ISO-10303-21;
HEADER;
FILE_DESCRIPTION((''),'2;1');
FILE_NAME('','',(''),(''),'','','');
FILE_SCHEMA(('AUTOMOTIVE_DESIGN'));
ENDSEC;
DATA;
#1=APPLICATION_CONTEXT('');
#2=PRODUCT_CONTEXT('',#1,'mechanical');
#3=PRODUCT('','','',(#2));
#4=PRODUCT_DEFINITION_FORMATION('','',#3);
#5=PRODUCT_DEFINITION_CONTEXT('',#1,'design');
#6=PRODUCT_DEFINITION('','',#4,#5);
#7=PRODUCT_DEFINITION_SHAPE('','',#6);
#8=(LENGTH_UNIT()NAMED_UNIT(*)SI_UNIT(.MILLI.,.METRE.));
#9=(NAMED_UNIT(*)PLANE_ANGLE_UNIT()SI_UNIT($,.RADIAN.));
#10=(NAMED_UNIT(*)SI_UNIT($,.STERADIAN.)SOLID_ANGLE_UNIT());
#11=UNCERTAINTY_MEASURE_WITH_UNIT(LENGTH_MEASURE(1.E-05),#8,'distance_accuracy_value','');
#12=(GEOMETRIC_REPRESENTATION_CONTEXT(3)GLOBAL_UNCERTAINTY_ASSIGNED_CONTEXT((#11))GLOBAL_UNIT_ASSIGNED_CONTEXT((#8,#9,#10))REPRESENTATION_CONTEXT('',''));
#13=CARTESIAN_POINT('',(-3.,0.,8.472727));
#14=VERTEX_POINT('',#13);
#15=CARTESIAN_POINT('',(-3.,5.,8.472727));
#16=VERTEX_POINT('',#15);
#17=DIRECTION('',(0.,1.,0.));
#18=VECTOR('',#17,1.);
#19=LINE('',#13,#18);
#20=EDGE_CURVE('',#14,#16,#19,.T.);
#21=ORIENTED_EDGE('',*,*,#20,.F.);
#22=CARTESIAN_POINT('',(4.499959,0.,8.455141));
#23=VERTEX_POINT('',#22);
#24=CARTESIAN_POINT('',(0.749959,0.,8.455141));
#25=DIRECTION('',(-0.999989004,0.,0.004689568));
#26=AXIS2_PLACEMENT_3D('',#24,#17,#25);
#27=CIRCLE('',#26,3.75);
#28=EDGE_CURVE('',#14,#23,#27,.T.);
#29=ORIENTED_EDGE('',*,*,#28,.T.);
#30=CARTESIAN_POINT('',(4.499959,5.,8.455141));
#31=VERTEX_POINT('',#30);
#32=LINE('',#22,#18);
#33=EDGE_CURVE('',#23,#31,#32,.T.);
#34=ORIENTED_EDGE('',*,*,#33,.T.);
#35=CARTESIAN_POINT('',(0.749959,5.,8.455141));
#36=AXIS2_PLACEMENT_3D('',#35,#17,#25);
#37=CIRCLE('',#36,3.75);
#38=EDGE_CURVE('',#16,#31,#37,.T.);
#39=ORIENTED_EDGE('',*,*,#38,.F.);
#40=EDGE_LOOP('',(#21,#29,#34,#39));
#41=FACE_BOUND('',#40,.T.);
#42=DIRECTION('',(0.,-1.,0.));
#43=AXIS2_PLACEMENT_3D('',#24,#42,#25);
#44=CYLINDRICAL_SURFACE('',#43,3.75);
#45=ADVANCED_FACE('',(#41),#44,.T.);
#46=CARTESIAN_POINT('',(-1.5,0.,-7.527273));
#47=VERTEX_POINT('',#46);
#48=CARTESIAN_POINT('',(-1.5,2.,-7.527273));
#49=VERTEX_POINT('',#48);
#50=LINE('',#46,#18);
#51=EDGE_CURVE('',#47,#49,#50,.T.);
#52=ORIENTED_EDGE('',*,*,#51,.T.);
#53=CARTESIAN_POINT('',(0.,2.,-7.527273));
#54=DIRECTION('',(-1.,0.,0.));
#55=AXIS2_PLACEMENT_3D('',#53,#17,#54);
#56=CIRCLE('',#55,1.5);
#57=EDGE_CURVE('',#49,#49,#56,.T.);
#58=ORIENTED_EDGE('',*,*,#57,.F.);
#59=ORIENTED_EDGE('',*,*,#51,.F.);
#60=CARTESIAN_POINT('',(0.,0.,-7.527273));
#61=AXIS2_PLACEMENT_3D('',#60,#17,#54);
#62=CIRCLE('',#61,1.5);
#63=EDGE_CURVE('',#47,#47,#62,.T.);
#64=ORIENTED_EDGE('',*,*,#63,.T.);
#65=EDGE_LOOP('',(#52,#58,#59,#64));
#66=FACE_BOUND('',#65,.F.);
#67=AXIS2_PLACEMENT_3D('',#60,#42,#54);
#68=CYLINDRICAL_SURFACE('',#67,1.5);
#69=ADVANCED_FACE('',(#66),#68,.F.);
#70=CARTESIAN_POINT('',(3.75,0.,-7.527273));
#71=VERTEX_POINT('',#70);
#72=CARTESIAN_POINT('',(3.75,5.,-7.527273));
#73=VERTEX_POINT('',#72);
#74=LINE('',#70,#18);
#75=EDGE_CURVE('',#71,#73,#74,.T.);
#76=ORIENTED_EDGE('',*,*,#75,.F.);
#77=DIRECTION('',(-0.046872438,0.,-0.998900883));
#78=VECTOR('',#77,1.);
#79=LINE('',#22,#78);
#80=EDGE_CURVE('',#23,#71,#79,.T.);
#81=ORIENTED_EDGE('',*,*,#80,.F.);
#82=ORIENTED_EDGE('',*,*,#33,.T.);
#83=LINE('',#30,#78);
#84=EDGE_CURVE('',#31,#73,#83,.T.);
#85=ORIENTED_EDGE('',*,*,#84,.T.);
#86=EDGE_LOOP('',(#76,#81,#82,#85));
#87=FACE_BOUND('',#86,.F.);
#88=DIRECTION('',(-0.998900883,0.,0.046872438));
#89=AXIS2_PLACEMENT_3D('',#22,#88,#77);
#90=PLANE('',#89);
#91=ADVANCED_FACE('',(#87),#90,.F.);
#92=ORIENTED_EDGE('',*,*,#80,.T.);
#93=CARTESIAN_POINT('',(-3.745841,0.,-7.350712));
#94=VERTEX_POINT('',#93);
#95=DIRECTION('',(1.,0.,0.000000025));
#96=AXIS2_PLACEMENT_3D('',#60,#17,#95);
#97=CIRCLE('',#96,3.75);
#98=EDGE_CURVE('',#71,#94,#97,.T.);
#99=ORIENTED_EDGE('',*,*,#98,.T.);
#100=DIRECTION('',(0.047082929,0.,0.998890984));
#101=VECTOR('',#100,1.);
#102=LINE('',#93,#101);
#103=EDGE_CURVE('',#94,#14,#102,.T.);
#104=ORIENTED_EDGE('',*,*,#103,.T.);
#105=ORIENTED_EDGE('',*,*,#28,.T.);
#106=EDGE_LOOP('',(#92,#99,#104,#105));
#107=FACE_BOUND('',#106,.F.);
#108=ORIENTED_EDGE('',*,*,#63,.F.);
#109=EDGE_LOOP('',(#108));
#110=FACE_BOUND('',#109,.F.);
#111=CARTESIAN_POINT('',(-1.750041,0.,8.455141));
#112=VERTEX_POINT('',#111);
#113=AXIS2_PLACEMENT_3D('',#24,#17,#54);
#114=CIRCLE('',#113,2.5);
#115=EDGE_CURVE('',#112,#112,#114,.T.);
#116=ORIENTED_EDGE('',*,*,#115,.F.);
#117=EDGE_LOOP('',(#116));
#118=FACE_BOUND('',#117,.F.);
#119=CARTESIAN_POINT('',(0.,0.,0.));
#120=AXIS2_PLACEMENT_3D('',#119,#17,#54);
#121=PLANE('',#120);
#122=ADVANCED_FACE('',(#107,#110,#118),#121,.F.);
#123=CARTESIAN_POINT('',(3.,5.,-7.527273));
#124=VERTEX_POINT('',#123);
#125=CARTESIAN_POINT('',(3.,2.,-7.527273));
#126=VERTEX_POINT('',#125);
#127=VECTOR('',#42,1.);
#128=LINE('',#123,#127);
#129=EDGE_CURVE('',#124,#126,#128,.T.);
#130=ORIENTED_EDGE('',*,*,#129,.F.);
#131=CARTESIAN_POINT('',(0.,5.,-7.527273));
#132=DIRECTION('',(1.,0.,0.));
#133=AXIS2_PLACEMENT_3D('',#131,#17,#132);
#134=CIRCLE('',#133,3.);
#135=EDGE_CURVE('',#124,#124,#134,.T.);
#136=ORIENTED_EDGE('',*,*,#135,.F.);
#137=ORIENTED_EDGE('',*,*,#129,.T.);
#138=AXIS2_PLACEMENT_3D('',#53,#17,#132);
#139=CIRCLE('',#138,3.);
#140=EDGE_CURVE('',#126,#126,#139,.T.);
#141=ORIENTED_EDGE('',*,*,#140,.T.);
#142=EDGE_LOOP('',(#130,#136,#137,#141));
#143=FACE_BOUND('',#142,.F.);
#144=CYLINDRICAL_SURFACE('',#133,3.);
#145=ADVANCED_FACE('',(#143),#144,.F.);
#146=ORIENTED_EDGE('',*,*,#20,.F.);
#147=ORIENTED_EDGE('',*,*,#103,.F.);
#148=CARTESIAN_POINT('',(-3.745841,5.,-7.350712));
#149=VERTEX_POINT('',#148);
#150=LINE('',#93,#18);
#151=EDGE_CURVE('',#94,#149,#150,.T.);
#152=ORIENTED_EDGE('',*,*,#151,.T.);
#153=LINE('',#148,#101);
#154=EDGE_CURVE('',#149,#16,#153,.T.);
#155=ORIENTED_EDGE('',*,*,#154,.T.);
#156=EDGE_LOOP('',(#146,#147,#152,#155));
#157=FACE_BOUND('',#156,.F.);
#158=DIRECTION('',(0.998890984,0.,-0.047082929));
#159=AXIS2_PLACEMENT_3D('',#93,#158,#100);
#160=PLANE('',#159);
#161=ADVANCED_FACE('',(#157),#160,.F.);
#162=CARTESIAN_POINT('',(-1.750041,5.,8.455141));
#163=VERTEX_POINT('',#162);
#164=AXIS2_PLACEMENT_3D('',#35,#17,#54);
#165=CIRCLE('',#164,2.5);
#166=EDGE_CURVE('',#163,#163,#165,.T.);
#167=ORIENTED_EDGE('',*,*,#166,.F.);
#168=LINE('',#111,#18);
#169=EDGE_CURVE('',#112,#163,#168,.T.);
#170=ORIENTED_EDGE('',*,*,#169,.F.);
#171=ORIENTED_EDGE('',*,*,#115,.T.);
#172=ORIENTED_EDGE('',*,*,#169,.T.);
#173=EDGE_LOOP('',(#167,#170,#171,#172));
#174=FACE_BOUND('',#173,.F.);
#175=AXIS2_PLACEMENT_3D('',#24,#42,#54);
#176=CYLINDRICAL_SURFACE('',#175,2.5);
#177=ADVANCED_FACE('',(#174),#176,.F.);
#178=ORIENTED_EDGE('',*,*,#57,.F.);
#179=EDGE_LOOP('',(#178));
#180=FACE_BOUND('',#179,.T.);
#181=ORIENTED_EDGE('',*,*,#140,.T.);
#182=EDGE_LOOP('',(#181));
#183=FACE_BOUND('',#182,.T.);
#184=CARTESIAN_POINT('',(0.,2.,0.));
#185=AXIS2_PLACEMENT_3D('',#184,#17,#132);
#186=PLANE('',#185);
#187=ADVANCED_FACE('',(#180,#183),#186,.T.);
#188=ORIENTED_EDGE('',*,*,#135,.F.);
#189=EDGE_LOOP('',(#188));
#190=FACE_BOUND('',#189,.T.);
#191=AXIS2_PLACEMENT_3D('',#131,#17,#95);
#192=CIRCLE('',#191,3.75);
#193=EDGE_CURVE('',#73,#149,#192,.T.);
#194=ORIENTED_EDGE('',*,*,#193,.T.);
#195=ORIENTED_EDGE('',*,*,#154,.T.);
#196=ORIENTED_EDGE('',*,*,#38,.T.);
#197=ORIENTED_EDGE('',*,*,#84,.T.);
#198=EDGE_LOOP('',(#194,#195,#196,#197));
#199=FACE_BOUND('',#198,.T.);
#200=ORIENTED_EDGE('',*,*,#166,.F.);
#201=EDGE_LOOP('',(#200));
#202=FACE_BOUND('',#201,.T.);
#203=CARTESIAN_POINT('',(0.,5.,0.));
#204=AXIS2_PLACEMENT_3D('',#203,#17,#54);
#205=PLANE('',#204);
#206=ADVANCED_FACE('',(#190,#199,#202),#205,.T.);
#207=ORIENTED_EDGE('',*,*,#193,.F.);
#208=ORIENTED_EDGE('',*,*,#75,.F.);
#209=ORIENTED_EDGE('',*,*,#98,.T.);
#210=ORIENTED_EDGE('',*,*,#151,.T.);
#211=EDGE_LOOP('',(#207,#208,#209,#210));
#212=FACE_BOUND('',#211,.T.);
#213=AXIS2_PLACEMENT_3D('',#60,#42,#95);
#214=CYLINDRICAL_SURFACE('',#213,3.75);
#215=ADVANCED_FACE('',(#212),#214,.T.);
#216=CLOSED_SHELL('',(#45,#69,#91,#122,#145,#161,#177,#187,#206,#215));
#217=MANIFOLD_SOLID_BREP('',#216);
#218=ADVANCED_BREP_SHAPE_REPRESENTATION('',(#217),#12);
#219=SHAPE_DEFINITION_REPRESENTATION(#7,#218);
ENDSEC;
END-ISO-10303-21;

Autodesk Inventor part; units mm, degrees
ref_plane "YZ Plane" through (0, 0, 0) normal (1, 0, 0) x (0, 1, 0)
ref_plane "XZ Plane" through (0, 0, 0) normal (0, 1, 0) x (-1, 0, 0)
ref_plane "XY Plane" through (0, 0, 0) normal (0, 0, 1) x (1, 0, 0)
sketch "Sketch1" plane through (0, 0, 0) normal (0, 1, 0) x (-1, 0, 0)
  circle A0 centre (-0.749959, 8.455141) radius 2.5
  circle A1 centre (0, -7.527273) radius 1.5
  circle A2 centre (-0.749959, 8.455141) radius 3.75
  circle A3 centre (0, -7.527273) radius 3
  line L0 (3, 8.472727) -> (3, -7.527273)
  line L1 (-4.499959, 8.455141) -> (-2.987099, -7.805192)
  circle A4 centre (0, -7.527273) radius 3.75
  line L2 (-4.499959, 8.455141) -> (-3.75, -7.527273)
  line L3 (3, 8.472727) -> (3.745841, -7.350712)
  point P0 (0, 0)
  dimension "d0" = 16
  dimension "d1" = 5
  dimension "d2" = 3
  dimension "d3" = 7.5
  dimension "d4" = 6
  dimension "d10" = 7.5
sketch "Sketch1 outline for Extrusion1" plane through (0, 0, 0) normal (0, 1, 0) x (-1, 0, 0)
  arc A0 (3, 8.472727) -> (-4.499959, 8.455141) centre (-0.749959, 8.455141) ccw
  line L0 (-4.499959, 8.455141) -> (-3.75, -7.527273)
  arc A1 (-3.75, -7.527273) -> (3.745841, -7.350712) centre (0, -7.527273) ccw
  line L1 (3.745841, -7.350712) -> (3, 8.472727)
  circle A2 centre (0, -7.527273) radius 1.5
  circle A3 centre (-0.749959, 8.455141) radius 2.5
extrude "Extrusion1" add sketch "Sketch1 outline for Extrusion1" along normal blind 5
sketch "Sketch2" plane through (0, 5, 0) normal (0, 1, 0) x (1, 0, 0)
  circle A0 centre (0, 7.527273) radius 1.5
  circle A1 centre (0, 7.527273) radius 3
  point P0 (0, 0)
  point P1 (3, 7.527273)
  dimension "d7" = 6
extrude "Extrusion2" cut sketch "Sketch2" against normal blind 3
sketch "Sketch3" plane through (0, 5, 0) normal (0, 1, 0) x (1, 0, 0)
  circle A0 centre (0.749959, -8.455141) radius 2.5
  circle A1 centre (0, 7.527273) radius 3
  circle A2 centre (0, 7.527273) radius 1.5
  arc A3 (3.75, 7.527273) -> (-3.745841, 7.350712) centre (0, 7.527273) ccw
  point P0 (0, 0)
properties part number "Redesign_Linkage_3DPrint"
